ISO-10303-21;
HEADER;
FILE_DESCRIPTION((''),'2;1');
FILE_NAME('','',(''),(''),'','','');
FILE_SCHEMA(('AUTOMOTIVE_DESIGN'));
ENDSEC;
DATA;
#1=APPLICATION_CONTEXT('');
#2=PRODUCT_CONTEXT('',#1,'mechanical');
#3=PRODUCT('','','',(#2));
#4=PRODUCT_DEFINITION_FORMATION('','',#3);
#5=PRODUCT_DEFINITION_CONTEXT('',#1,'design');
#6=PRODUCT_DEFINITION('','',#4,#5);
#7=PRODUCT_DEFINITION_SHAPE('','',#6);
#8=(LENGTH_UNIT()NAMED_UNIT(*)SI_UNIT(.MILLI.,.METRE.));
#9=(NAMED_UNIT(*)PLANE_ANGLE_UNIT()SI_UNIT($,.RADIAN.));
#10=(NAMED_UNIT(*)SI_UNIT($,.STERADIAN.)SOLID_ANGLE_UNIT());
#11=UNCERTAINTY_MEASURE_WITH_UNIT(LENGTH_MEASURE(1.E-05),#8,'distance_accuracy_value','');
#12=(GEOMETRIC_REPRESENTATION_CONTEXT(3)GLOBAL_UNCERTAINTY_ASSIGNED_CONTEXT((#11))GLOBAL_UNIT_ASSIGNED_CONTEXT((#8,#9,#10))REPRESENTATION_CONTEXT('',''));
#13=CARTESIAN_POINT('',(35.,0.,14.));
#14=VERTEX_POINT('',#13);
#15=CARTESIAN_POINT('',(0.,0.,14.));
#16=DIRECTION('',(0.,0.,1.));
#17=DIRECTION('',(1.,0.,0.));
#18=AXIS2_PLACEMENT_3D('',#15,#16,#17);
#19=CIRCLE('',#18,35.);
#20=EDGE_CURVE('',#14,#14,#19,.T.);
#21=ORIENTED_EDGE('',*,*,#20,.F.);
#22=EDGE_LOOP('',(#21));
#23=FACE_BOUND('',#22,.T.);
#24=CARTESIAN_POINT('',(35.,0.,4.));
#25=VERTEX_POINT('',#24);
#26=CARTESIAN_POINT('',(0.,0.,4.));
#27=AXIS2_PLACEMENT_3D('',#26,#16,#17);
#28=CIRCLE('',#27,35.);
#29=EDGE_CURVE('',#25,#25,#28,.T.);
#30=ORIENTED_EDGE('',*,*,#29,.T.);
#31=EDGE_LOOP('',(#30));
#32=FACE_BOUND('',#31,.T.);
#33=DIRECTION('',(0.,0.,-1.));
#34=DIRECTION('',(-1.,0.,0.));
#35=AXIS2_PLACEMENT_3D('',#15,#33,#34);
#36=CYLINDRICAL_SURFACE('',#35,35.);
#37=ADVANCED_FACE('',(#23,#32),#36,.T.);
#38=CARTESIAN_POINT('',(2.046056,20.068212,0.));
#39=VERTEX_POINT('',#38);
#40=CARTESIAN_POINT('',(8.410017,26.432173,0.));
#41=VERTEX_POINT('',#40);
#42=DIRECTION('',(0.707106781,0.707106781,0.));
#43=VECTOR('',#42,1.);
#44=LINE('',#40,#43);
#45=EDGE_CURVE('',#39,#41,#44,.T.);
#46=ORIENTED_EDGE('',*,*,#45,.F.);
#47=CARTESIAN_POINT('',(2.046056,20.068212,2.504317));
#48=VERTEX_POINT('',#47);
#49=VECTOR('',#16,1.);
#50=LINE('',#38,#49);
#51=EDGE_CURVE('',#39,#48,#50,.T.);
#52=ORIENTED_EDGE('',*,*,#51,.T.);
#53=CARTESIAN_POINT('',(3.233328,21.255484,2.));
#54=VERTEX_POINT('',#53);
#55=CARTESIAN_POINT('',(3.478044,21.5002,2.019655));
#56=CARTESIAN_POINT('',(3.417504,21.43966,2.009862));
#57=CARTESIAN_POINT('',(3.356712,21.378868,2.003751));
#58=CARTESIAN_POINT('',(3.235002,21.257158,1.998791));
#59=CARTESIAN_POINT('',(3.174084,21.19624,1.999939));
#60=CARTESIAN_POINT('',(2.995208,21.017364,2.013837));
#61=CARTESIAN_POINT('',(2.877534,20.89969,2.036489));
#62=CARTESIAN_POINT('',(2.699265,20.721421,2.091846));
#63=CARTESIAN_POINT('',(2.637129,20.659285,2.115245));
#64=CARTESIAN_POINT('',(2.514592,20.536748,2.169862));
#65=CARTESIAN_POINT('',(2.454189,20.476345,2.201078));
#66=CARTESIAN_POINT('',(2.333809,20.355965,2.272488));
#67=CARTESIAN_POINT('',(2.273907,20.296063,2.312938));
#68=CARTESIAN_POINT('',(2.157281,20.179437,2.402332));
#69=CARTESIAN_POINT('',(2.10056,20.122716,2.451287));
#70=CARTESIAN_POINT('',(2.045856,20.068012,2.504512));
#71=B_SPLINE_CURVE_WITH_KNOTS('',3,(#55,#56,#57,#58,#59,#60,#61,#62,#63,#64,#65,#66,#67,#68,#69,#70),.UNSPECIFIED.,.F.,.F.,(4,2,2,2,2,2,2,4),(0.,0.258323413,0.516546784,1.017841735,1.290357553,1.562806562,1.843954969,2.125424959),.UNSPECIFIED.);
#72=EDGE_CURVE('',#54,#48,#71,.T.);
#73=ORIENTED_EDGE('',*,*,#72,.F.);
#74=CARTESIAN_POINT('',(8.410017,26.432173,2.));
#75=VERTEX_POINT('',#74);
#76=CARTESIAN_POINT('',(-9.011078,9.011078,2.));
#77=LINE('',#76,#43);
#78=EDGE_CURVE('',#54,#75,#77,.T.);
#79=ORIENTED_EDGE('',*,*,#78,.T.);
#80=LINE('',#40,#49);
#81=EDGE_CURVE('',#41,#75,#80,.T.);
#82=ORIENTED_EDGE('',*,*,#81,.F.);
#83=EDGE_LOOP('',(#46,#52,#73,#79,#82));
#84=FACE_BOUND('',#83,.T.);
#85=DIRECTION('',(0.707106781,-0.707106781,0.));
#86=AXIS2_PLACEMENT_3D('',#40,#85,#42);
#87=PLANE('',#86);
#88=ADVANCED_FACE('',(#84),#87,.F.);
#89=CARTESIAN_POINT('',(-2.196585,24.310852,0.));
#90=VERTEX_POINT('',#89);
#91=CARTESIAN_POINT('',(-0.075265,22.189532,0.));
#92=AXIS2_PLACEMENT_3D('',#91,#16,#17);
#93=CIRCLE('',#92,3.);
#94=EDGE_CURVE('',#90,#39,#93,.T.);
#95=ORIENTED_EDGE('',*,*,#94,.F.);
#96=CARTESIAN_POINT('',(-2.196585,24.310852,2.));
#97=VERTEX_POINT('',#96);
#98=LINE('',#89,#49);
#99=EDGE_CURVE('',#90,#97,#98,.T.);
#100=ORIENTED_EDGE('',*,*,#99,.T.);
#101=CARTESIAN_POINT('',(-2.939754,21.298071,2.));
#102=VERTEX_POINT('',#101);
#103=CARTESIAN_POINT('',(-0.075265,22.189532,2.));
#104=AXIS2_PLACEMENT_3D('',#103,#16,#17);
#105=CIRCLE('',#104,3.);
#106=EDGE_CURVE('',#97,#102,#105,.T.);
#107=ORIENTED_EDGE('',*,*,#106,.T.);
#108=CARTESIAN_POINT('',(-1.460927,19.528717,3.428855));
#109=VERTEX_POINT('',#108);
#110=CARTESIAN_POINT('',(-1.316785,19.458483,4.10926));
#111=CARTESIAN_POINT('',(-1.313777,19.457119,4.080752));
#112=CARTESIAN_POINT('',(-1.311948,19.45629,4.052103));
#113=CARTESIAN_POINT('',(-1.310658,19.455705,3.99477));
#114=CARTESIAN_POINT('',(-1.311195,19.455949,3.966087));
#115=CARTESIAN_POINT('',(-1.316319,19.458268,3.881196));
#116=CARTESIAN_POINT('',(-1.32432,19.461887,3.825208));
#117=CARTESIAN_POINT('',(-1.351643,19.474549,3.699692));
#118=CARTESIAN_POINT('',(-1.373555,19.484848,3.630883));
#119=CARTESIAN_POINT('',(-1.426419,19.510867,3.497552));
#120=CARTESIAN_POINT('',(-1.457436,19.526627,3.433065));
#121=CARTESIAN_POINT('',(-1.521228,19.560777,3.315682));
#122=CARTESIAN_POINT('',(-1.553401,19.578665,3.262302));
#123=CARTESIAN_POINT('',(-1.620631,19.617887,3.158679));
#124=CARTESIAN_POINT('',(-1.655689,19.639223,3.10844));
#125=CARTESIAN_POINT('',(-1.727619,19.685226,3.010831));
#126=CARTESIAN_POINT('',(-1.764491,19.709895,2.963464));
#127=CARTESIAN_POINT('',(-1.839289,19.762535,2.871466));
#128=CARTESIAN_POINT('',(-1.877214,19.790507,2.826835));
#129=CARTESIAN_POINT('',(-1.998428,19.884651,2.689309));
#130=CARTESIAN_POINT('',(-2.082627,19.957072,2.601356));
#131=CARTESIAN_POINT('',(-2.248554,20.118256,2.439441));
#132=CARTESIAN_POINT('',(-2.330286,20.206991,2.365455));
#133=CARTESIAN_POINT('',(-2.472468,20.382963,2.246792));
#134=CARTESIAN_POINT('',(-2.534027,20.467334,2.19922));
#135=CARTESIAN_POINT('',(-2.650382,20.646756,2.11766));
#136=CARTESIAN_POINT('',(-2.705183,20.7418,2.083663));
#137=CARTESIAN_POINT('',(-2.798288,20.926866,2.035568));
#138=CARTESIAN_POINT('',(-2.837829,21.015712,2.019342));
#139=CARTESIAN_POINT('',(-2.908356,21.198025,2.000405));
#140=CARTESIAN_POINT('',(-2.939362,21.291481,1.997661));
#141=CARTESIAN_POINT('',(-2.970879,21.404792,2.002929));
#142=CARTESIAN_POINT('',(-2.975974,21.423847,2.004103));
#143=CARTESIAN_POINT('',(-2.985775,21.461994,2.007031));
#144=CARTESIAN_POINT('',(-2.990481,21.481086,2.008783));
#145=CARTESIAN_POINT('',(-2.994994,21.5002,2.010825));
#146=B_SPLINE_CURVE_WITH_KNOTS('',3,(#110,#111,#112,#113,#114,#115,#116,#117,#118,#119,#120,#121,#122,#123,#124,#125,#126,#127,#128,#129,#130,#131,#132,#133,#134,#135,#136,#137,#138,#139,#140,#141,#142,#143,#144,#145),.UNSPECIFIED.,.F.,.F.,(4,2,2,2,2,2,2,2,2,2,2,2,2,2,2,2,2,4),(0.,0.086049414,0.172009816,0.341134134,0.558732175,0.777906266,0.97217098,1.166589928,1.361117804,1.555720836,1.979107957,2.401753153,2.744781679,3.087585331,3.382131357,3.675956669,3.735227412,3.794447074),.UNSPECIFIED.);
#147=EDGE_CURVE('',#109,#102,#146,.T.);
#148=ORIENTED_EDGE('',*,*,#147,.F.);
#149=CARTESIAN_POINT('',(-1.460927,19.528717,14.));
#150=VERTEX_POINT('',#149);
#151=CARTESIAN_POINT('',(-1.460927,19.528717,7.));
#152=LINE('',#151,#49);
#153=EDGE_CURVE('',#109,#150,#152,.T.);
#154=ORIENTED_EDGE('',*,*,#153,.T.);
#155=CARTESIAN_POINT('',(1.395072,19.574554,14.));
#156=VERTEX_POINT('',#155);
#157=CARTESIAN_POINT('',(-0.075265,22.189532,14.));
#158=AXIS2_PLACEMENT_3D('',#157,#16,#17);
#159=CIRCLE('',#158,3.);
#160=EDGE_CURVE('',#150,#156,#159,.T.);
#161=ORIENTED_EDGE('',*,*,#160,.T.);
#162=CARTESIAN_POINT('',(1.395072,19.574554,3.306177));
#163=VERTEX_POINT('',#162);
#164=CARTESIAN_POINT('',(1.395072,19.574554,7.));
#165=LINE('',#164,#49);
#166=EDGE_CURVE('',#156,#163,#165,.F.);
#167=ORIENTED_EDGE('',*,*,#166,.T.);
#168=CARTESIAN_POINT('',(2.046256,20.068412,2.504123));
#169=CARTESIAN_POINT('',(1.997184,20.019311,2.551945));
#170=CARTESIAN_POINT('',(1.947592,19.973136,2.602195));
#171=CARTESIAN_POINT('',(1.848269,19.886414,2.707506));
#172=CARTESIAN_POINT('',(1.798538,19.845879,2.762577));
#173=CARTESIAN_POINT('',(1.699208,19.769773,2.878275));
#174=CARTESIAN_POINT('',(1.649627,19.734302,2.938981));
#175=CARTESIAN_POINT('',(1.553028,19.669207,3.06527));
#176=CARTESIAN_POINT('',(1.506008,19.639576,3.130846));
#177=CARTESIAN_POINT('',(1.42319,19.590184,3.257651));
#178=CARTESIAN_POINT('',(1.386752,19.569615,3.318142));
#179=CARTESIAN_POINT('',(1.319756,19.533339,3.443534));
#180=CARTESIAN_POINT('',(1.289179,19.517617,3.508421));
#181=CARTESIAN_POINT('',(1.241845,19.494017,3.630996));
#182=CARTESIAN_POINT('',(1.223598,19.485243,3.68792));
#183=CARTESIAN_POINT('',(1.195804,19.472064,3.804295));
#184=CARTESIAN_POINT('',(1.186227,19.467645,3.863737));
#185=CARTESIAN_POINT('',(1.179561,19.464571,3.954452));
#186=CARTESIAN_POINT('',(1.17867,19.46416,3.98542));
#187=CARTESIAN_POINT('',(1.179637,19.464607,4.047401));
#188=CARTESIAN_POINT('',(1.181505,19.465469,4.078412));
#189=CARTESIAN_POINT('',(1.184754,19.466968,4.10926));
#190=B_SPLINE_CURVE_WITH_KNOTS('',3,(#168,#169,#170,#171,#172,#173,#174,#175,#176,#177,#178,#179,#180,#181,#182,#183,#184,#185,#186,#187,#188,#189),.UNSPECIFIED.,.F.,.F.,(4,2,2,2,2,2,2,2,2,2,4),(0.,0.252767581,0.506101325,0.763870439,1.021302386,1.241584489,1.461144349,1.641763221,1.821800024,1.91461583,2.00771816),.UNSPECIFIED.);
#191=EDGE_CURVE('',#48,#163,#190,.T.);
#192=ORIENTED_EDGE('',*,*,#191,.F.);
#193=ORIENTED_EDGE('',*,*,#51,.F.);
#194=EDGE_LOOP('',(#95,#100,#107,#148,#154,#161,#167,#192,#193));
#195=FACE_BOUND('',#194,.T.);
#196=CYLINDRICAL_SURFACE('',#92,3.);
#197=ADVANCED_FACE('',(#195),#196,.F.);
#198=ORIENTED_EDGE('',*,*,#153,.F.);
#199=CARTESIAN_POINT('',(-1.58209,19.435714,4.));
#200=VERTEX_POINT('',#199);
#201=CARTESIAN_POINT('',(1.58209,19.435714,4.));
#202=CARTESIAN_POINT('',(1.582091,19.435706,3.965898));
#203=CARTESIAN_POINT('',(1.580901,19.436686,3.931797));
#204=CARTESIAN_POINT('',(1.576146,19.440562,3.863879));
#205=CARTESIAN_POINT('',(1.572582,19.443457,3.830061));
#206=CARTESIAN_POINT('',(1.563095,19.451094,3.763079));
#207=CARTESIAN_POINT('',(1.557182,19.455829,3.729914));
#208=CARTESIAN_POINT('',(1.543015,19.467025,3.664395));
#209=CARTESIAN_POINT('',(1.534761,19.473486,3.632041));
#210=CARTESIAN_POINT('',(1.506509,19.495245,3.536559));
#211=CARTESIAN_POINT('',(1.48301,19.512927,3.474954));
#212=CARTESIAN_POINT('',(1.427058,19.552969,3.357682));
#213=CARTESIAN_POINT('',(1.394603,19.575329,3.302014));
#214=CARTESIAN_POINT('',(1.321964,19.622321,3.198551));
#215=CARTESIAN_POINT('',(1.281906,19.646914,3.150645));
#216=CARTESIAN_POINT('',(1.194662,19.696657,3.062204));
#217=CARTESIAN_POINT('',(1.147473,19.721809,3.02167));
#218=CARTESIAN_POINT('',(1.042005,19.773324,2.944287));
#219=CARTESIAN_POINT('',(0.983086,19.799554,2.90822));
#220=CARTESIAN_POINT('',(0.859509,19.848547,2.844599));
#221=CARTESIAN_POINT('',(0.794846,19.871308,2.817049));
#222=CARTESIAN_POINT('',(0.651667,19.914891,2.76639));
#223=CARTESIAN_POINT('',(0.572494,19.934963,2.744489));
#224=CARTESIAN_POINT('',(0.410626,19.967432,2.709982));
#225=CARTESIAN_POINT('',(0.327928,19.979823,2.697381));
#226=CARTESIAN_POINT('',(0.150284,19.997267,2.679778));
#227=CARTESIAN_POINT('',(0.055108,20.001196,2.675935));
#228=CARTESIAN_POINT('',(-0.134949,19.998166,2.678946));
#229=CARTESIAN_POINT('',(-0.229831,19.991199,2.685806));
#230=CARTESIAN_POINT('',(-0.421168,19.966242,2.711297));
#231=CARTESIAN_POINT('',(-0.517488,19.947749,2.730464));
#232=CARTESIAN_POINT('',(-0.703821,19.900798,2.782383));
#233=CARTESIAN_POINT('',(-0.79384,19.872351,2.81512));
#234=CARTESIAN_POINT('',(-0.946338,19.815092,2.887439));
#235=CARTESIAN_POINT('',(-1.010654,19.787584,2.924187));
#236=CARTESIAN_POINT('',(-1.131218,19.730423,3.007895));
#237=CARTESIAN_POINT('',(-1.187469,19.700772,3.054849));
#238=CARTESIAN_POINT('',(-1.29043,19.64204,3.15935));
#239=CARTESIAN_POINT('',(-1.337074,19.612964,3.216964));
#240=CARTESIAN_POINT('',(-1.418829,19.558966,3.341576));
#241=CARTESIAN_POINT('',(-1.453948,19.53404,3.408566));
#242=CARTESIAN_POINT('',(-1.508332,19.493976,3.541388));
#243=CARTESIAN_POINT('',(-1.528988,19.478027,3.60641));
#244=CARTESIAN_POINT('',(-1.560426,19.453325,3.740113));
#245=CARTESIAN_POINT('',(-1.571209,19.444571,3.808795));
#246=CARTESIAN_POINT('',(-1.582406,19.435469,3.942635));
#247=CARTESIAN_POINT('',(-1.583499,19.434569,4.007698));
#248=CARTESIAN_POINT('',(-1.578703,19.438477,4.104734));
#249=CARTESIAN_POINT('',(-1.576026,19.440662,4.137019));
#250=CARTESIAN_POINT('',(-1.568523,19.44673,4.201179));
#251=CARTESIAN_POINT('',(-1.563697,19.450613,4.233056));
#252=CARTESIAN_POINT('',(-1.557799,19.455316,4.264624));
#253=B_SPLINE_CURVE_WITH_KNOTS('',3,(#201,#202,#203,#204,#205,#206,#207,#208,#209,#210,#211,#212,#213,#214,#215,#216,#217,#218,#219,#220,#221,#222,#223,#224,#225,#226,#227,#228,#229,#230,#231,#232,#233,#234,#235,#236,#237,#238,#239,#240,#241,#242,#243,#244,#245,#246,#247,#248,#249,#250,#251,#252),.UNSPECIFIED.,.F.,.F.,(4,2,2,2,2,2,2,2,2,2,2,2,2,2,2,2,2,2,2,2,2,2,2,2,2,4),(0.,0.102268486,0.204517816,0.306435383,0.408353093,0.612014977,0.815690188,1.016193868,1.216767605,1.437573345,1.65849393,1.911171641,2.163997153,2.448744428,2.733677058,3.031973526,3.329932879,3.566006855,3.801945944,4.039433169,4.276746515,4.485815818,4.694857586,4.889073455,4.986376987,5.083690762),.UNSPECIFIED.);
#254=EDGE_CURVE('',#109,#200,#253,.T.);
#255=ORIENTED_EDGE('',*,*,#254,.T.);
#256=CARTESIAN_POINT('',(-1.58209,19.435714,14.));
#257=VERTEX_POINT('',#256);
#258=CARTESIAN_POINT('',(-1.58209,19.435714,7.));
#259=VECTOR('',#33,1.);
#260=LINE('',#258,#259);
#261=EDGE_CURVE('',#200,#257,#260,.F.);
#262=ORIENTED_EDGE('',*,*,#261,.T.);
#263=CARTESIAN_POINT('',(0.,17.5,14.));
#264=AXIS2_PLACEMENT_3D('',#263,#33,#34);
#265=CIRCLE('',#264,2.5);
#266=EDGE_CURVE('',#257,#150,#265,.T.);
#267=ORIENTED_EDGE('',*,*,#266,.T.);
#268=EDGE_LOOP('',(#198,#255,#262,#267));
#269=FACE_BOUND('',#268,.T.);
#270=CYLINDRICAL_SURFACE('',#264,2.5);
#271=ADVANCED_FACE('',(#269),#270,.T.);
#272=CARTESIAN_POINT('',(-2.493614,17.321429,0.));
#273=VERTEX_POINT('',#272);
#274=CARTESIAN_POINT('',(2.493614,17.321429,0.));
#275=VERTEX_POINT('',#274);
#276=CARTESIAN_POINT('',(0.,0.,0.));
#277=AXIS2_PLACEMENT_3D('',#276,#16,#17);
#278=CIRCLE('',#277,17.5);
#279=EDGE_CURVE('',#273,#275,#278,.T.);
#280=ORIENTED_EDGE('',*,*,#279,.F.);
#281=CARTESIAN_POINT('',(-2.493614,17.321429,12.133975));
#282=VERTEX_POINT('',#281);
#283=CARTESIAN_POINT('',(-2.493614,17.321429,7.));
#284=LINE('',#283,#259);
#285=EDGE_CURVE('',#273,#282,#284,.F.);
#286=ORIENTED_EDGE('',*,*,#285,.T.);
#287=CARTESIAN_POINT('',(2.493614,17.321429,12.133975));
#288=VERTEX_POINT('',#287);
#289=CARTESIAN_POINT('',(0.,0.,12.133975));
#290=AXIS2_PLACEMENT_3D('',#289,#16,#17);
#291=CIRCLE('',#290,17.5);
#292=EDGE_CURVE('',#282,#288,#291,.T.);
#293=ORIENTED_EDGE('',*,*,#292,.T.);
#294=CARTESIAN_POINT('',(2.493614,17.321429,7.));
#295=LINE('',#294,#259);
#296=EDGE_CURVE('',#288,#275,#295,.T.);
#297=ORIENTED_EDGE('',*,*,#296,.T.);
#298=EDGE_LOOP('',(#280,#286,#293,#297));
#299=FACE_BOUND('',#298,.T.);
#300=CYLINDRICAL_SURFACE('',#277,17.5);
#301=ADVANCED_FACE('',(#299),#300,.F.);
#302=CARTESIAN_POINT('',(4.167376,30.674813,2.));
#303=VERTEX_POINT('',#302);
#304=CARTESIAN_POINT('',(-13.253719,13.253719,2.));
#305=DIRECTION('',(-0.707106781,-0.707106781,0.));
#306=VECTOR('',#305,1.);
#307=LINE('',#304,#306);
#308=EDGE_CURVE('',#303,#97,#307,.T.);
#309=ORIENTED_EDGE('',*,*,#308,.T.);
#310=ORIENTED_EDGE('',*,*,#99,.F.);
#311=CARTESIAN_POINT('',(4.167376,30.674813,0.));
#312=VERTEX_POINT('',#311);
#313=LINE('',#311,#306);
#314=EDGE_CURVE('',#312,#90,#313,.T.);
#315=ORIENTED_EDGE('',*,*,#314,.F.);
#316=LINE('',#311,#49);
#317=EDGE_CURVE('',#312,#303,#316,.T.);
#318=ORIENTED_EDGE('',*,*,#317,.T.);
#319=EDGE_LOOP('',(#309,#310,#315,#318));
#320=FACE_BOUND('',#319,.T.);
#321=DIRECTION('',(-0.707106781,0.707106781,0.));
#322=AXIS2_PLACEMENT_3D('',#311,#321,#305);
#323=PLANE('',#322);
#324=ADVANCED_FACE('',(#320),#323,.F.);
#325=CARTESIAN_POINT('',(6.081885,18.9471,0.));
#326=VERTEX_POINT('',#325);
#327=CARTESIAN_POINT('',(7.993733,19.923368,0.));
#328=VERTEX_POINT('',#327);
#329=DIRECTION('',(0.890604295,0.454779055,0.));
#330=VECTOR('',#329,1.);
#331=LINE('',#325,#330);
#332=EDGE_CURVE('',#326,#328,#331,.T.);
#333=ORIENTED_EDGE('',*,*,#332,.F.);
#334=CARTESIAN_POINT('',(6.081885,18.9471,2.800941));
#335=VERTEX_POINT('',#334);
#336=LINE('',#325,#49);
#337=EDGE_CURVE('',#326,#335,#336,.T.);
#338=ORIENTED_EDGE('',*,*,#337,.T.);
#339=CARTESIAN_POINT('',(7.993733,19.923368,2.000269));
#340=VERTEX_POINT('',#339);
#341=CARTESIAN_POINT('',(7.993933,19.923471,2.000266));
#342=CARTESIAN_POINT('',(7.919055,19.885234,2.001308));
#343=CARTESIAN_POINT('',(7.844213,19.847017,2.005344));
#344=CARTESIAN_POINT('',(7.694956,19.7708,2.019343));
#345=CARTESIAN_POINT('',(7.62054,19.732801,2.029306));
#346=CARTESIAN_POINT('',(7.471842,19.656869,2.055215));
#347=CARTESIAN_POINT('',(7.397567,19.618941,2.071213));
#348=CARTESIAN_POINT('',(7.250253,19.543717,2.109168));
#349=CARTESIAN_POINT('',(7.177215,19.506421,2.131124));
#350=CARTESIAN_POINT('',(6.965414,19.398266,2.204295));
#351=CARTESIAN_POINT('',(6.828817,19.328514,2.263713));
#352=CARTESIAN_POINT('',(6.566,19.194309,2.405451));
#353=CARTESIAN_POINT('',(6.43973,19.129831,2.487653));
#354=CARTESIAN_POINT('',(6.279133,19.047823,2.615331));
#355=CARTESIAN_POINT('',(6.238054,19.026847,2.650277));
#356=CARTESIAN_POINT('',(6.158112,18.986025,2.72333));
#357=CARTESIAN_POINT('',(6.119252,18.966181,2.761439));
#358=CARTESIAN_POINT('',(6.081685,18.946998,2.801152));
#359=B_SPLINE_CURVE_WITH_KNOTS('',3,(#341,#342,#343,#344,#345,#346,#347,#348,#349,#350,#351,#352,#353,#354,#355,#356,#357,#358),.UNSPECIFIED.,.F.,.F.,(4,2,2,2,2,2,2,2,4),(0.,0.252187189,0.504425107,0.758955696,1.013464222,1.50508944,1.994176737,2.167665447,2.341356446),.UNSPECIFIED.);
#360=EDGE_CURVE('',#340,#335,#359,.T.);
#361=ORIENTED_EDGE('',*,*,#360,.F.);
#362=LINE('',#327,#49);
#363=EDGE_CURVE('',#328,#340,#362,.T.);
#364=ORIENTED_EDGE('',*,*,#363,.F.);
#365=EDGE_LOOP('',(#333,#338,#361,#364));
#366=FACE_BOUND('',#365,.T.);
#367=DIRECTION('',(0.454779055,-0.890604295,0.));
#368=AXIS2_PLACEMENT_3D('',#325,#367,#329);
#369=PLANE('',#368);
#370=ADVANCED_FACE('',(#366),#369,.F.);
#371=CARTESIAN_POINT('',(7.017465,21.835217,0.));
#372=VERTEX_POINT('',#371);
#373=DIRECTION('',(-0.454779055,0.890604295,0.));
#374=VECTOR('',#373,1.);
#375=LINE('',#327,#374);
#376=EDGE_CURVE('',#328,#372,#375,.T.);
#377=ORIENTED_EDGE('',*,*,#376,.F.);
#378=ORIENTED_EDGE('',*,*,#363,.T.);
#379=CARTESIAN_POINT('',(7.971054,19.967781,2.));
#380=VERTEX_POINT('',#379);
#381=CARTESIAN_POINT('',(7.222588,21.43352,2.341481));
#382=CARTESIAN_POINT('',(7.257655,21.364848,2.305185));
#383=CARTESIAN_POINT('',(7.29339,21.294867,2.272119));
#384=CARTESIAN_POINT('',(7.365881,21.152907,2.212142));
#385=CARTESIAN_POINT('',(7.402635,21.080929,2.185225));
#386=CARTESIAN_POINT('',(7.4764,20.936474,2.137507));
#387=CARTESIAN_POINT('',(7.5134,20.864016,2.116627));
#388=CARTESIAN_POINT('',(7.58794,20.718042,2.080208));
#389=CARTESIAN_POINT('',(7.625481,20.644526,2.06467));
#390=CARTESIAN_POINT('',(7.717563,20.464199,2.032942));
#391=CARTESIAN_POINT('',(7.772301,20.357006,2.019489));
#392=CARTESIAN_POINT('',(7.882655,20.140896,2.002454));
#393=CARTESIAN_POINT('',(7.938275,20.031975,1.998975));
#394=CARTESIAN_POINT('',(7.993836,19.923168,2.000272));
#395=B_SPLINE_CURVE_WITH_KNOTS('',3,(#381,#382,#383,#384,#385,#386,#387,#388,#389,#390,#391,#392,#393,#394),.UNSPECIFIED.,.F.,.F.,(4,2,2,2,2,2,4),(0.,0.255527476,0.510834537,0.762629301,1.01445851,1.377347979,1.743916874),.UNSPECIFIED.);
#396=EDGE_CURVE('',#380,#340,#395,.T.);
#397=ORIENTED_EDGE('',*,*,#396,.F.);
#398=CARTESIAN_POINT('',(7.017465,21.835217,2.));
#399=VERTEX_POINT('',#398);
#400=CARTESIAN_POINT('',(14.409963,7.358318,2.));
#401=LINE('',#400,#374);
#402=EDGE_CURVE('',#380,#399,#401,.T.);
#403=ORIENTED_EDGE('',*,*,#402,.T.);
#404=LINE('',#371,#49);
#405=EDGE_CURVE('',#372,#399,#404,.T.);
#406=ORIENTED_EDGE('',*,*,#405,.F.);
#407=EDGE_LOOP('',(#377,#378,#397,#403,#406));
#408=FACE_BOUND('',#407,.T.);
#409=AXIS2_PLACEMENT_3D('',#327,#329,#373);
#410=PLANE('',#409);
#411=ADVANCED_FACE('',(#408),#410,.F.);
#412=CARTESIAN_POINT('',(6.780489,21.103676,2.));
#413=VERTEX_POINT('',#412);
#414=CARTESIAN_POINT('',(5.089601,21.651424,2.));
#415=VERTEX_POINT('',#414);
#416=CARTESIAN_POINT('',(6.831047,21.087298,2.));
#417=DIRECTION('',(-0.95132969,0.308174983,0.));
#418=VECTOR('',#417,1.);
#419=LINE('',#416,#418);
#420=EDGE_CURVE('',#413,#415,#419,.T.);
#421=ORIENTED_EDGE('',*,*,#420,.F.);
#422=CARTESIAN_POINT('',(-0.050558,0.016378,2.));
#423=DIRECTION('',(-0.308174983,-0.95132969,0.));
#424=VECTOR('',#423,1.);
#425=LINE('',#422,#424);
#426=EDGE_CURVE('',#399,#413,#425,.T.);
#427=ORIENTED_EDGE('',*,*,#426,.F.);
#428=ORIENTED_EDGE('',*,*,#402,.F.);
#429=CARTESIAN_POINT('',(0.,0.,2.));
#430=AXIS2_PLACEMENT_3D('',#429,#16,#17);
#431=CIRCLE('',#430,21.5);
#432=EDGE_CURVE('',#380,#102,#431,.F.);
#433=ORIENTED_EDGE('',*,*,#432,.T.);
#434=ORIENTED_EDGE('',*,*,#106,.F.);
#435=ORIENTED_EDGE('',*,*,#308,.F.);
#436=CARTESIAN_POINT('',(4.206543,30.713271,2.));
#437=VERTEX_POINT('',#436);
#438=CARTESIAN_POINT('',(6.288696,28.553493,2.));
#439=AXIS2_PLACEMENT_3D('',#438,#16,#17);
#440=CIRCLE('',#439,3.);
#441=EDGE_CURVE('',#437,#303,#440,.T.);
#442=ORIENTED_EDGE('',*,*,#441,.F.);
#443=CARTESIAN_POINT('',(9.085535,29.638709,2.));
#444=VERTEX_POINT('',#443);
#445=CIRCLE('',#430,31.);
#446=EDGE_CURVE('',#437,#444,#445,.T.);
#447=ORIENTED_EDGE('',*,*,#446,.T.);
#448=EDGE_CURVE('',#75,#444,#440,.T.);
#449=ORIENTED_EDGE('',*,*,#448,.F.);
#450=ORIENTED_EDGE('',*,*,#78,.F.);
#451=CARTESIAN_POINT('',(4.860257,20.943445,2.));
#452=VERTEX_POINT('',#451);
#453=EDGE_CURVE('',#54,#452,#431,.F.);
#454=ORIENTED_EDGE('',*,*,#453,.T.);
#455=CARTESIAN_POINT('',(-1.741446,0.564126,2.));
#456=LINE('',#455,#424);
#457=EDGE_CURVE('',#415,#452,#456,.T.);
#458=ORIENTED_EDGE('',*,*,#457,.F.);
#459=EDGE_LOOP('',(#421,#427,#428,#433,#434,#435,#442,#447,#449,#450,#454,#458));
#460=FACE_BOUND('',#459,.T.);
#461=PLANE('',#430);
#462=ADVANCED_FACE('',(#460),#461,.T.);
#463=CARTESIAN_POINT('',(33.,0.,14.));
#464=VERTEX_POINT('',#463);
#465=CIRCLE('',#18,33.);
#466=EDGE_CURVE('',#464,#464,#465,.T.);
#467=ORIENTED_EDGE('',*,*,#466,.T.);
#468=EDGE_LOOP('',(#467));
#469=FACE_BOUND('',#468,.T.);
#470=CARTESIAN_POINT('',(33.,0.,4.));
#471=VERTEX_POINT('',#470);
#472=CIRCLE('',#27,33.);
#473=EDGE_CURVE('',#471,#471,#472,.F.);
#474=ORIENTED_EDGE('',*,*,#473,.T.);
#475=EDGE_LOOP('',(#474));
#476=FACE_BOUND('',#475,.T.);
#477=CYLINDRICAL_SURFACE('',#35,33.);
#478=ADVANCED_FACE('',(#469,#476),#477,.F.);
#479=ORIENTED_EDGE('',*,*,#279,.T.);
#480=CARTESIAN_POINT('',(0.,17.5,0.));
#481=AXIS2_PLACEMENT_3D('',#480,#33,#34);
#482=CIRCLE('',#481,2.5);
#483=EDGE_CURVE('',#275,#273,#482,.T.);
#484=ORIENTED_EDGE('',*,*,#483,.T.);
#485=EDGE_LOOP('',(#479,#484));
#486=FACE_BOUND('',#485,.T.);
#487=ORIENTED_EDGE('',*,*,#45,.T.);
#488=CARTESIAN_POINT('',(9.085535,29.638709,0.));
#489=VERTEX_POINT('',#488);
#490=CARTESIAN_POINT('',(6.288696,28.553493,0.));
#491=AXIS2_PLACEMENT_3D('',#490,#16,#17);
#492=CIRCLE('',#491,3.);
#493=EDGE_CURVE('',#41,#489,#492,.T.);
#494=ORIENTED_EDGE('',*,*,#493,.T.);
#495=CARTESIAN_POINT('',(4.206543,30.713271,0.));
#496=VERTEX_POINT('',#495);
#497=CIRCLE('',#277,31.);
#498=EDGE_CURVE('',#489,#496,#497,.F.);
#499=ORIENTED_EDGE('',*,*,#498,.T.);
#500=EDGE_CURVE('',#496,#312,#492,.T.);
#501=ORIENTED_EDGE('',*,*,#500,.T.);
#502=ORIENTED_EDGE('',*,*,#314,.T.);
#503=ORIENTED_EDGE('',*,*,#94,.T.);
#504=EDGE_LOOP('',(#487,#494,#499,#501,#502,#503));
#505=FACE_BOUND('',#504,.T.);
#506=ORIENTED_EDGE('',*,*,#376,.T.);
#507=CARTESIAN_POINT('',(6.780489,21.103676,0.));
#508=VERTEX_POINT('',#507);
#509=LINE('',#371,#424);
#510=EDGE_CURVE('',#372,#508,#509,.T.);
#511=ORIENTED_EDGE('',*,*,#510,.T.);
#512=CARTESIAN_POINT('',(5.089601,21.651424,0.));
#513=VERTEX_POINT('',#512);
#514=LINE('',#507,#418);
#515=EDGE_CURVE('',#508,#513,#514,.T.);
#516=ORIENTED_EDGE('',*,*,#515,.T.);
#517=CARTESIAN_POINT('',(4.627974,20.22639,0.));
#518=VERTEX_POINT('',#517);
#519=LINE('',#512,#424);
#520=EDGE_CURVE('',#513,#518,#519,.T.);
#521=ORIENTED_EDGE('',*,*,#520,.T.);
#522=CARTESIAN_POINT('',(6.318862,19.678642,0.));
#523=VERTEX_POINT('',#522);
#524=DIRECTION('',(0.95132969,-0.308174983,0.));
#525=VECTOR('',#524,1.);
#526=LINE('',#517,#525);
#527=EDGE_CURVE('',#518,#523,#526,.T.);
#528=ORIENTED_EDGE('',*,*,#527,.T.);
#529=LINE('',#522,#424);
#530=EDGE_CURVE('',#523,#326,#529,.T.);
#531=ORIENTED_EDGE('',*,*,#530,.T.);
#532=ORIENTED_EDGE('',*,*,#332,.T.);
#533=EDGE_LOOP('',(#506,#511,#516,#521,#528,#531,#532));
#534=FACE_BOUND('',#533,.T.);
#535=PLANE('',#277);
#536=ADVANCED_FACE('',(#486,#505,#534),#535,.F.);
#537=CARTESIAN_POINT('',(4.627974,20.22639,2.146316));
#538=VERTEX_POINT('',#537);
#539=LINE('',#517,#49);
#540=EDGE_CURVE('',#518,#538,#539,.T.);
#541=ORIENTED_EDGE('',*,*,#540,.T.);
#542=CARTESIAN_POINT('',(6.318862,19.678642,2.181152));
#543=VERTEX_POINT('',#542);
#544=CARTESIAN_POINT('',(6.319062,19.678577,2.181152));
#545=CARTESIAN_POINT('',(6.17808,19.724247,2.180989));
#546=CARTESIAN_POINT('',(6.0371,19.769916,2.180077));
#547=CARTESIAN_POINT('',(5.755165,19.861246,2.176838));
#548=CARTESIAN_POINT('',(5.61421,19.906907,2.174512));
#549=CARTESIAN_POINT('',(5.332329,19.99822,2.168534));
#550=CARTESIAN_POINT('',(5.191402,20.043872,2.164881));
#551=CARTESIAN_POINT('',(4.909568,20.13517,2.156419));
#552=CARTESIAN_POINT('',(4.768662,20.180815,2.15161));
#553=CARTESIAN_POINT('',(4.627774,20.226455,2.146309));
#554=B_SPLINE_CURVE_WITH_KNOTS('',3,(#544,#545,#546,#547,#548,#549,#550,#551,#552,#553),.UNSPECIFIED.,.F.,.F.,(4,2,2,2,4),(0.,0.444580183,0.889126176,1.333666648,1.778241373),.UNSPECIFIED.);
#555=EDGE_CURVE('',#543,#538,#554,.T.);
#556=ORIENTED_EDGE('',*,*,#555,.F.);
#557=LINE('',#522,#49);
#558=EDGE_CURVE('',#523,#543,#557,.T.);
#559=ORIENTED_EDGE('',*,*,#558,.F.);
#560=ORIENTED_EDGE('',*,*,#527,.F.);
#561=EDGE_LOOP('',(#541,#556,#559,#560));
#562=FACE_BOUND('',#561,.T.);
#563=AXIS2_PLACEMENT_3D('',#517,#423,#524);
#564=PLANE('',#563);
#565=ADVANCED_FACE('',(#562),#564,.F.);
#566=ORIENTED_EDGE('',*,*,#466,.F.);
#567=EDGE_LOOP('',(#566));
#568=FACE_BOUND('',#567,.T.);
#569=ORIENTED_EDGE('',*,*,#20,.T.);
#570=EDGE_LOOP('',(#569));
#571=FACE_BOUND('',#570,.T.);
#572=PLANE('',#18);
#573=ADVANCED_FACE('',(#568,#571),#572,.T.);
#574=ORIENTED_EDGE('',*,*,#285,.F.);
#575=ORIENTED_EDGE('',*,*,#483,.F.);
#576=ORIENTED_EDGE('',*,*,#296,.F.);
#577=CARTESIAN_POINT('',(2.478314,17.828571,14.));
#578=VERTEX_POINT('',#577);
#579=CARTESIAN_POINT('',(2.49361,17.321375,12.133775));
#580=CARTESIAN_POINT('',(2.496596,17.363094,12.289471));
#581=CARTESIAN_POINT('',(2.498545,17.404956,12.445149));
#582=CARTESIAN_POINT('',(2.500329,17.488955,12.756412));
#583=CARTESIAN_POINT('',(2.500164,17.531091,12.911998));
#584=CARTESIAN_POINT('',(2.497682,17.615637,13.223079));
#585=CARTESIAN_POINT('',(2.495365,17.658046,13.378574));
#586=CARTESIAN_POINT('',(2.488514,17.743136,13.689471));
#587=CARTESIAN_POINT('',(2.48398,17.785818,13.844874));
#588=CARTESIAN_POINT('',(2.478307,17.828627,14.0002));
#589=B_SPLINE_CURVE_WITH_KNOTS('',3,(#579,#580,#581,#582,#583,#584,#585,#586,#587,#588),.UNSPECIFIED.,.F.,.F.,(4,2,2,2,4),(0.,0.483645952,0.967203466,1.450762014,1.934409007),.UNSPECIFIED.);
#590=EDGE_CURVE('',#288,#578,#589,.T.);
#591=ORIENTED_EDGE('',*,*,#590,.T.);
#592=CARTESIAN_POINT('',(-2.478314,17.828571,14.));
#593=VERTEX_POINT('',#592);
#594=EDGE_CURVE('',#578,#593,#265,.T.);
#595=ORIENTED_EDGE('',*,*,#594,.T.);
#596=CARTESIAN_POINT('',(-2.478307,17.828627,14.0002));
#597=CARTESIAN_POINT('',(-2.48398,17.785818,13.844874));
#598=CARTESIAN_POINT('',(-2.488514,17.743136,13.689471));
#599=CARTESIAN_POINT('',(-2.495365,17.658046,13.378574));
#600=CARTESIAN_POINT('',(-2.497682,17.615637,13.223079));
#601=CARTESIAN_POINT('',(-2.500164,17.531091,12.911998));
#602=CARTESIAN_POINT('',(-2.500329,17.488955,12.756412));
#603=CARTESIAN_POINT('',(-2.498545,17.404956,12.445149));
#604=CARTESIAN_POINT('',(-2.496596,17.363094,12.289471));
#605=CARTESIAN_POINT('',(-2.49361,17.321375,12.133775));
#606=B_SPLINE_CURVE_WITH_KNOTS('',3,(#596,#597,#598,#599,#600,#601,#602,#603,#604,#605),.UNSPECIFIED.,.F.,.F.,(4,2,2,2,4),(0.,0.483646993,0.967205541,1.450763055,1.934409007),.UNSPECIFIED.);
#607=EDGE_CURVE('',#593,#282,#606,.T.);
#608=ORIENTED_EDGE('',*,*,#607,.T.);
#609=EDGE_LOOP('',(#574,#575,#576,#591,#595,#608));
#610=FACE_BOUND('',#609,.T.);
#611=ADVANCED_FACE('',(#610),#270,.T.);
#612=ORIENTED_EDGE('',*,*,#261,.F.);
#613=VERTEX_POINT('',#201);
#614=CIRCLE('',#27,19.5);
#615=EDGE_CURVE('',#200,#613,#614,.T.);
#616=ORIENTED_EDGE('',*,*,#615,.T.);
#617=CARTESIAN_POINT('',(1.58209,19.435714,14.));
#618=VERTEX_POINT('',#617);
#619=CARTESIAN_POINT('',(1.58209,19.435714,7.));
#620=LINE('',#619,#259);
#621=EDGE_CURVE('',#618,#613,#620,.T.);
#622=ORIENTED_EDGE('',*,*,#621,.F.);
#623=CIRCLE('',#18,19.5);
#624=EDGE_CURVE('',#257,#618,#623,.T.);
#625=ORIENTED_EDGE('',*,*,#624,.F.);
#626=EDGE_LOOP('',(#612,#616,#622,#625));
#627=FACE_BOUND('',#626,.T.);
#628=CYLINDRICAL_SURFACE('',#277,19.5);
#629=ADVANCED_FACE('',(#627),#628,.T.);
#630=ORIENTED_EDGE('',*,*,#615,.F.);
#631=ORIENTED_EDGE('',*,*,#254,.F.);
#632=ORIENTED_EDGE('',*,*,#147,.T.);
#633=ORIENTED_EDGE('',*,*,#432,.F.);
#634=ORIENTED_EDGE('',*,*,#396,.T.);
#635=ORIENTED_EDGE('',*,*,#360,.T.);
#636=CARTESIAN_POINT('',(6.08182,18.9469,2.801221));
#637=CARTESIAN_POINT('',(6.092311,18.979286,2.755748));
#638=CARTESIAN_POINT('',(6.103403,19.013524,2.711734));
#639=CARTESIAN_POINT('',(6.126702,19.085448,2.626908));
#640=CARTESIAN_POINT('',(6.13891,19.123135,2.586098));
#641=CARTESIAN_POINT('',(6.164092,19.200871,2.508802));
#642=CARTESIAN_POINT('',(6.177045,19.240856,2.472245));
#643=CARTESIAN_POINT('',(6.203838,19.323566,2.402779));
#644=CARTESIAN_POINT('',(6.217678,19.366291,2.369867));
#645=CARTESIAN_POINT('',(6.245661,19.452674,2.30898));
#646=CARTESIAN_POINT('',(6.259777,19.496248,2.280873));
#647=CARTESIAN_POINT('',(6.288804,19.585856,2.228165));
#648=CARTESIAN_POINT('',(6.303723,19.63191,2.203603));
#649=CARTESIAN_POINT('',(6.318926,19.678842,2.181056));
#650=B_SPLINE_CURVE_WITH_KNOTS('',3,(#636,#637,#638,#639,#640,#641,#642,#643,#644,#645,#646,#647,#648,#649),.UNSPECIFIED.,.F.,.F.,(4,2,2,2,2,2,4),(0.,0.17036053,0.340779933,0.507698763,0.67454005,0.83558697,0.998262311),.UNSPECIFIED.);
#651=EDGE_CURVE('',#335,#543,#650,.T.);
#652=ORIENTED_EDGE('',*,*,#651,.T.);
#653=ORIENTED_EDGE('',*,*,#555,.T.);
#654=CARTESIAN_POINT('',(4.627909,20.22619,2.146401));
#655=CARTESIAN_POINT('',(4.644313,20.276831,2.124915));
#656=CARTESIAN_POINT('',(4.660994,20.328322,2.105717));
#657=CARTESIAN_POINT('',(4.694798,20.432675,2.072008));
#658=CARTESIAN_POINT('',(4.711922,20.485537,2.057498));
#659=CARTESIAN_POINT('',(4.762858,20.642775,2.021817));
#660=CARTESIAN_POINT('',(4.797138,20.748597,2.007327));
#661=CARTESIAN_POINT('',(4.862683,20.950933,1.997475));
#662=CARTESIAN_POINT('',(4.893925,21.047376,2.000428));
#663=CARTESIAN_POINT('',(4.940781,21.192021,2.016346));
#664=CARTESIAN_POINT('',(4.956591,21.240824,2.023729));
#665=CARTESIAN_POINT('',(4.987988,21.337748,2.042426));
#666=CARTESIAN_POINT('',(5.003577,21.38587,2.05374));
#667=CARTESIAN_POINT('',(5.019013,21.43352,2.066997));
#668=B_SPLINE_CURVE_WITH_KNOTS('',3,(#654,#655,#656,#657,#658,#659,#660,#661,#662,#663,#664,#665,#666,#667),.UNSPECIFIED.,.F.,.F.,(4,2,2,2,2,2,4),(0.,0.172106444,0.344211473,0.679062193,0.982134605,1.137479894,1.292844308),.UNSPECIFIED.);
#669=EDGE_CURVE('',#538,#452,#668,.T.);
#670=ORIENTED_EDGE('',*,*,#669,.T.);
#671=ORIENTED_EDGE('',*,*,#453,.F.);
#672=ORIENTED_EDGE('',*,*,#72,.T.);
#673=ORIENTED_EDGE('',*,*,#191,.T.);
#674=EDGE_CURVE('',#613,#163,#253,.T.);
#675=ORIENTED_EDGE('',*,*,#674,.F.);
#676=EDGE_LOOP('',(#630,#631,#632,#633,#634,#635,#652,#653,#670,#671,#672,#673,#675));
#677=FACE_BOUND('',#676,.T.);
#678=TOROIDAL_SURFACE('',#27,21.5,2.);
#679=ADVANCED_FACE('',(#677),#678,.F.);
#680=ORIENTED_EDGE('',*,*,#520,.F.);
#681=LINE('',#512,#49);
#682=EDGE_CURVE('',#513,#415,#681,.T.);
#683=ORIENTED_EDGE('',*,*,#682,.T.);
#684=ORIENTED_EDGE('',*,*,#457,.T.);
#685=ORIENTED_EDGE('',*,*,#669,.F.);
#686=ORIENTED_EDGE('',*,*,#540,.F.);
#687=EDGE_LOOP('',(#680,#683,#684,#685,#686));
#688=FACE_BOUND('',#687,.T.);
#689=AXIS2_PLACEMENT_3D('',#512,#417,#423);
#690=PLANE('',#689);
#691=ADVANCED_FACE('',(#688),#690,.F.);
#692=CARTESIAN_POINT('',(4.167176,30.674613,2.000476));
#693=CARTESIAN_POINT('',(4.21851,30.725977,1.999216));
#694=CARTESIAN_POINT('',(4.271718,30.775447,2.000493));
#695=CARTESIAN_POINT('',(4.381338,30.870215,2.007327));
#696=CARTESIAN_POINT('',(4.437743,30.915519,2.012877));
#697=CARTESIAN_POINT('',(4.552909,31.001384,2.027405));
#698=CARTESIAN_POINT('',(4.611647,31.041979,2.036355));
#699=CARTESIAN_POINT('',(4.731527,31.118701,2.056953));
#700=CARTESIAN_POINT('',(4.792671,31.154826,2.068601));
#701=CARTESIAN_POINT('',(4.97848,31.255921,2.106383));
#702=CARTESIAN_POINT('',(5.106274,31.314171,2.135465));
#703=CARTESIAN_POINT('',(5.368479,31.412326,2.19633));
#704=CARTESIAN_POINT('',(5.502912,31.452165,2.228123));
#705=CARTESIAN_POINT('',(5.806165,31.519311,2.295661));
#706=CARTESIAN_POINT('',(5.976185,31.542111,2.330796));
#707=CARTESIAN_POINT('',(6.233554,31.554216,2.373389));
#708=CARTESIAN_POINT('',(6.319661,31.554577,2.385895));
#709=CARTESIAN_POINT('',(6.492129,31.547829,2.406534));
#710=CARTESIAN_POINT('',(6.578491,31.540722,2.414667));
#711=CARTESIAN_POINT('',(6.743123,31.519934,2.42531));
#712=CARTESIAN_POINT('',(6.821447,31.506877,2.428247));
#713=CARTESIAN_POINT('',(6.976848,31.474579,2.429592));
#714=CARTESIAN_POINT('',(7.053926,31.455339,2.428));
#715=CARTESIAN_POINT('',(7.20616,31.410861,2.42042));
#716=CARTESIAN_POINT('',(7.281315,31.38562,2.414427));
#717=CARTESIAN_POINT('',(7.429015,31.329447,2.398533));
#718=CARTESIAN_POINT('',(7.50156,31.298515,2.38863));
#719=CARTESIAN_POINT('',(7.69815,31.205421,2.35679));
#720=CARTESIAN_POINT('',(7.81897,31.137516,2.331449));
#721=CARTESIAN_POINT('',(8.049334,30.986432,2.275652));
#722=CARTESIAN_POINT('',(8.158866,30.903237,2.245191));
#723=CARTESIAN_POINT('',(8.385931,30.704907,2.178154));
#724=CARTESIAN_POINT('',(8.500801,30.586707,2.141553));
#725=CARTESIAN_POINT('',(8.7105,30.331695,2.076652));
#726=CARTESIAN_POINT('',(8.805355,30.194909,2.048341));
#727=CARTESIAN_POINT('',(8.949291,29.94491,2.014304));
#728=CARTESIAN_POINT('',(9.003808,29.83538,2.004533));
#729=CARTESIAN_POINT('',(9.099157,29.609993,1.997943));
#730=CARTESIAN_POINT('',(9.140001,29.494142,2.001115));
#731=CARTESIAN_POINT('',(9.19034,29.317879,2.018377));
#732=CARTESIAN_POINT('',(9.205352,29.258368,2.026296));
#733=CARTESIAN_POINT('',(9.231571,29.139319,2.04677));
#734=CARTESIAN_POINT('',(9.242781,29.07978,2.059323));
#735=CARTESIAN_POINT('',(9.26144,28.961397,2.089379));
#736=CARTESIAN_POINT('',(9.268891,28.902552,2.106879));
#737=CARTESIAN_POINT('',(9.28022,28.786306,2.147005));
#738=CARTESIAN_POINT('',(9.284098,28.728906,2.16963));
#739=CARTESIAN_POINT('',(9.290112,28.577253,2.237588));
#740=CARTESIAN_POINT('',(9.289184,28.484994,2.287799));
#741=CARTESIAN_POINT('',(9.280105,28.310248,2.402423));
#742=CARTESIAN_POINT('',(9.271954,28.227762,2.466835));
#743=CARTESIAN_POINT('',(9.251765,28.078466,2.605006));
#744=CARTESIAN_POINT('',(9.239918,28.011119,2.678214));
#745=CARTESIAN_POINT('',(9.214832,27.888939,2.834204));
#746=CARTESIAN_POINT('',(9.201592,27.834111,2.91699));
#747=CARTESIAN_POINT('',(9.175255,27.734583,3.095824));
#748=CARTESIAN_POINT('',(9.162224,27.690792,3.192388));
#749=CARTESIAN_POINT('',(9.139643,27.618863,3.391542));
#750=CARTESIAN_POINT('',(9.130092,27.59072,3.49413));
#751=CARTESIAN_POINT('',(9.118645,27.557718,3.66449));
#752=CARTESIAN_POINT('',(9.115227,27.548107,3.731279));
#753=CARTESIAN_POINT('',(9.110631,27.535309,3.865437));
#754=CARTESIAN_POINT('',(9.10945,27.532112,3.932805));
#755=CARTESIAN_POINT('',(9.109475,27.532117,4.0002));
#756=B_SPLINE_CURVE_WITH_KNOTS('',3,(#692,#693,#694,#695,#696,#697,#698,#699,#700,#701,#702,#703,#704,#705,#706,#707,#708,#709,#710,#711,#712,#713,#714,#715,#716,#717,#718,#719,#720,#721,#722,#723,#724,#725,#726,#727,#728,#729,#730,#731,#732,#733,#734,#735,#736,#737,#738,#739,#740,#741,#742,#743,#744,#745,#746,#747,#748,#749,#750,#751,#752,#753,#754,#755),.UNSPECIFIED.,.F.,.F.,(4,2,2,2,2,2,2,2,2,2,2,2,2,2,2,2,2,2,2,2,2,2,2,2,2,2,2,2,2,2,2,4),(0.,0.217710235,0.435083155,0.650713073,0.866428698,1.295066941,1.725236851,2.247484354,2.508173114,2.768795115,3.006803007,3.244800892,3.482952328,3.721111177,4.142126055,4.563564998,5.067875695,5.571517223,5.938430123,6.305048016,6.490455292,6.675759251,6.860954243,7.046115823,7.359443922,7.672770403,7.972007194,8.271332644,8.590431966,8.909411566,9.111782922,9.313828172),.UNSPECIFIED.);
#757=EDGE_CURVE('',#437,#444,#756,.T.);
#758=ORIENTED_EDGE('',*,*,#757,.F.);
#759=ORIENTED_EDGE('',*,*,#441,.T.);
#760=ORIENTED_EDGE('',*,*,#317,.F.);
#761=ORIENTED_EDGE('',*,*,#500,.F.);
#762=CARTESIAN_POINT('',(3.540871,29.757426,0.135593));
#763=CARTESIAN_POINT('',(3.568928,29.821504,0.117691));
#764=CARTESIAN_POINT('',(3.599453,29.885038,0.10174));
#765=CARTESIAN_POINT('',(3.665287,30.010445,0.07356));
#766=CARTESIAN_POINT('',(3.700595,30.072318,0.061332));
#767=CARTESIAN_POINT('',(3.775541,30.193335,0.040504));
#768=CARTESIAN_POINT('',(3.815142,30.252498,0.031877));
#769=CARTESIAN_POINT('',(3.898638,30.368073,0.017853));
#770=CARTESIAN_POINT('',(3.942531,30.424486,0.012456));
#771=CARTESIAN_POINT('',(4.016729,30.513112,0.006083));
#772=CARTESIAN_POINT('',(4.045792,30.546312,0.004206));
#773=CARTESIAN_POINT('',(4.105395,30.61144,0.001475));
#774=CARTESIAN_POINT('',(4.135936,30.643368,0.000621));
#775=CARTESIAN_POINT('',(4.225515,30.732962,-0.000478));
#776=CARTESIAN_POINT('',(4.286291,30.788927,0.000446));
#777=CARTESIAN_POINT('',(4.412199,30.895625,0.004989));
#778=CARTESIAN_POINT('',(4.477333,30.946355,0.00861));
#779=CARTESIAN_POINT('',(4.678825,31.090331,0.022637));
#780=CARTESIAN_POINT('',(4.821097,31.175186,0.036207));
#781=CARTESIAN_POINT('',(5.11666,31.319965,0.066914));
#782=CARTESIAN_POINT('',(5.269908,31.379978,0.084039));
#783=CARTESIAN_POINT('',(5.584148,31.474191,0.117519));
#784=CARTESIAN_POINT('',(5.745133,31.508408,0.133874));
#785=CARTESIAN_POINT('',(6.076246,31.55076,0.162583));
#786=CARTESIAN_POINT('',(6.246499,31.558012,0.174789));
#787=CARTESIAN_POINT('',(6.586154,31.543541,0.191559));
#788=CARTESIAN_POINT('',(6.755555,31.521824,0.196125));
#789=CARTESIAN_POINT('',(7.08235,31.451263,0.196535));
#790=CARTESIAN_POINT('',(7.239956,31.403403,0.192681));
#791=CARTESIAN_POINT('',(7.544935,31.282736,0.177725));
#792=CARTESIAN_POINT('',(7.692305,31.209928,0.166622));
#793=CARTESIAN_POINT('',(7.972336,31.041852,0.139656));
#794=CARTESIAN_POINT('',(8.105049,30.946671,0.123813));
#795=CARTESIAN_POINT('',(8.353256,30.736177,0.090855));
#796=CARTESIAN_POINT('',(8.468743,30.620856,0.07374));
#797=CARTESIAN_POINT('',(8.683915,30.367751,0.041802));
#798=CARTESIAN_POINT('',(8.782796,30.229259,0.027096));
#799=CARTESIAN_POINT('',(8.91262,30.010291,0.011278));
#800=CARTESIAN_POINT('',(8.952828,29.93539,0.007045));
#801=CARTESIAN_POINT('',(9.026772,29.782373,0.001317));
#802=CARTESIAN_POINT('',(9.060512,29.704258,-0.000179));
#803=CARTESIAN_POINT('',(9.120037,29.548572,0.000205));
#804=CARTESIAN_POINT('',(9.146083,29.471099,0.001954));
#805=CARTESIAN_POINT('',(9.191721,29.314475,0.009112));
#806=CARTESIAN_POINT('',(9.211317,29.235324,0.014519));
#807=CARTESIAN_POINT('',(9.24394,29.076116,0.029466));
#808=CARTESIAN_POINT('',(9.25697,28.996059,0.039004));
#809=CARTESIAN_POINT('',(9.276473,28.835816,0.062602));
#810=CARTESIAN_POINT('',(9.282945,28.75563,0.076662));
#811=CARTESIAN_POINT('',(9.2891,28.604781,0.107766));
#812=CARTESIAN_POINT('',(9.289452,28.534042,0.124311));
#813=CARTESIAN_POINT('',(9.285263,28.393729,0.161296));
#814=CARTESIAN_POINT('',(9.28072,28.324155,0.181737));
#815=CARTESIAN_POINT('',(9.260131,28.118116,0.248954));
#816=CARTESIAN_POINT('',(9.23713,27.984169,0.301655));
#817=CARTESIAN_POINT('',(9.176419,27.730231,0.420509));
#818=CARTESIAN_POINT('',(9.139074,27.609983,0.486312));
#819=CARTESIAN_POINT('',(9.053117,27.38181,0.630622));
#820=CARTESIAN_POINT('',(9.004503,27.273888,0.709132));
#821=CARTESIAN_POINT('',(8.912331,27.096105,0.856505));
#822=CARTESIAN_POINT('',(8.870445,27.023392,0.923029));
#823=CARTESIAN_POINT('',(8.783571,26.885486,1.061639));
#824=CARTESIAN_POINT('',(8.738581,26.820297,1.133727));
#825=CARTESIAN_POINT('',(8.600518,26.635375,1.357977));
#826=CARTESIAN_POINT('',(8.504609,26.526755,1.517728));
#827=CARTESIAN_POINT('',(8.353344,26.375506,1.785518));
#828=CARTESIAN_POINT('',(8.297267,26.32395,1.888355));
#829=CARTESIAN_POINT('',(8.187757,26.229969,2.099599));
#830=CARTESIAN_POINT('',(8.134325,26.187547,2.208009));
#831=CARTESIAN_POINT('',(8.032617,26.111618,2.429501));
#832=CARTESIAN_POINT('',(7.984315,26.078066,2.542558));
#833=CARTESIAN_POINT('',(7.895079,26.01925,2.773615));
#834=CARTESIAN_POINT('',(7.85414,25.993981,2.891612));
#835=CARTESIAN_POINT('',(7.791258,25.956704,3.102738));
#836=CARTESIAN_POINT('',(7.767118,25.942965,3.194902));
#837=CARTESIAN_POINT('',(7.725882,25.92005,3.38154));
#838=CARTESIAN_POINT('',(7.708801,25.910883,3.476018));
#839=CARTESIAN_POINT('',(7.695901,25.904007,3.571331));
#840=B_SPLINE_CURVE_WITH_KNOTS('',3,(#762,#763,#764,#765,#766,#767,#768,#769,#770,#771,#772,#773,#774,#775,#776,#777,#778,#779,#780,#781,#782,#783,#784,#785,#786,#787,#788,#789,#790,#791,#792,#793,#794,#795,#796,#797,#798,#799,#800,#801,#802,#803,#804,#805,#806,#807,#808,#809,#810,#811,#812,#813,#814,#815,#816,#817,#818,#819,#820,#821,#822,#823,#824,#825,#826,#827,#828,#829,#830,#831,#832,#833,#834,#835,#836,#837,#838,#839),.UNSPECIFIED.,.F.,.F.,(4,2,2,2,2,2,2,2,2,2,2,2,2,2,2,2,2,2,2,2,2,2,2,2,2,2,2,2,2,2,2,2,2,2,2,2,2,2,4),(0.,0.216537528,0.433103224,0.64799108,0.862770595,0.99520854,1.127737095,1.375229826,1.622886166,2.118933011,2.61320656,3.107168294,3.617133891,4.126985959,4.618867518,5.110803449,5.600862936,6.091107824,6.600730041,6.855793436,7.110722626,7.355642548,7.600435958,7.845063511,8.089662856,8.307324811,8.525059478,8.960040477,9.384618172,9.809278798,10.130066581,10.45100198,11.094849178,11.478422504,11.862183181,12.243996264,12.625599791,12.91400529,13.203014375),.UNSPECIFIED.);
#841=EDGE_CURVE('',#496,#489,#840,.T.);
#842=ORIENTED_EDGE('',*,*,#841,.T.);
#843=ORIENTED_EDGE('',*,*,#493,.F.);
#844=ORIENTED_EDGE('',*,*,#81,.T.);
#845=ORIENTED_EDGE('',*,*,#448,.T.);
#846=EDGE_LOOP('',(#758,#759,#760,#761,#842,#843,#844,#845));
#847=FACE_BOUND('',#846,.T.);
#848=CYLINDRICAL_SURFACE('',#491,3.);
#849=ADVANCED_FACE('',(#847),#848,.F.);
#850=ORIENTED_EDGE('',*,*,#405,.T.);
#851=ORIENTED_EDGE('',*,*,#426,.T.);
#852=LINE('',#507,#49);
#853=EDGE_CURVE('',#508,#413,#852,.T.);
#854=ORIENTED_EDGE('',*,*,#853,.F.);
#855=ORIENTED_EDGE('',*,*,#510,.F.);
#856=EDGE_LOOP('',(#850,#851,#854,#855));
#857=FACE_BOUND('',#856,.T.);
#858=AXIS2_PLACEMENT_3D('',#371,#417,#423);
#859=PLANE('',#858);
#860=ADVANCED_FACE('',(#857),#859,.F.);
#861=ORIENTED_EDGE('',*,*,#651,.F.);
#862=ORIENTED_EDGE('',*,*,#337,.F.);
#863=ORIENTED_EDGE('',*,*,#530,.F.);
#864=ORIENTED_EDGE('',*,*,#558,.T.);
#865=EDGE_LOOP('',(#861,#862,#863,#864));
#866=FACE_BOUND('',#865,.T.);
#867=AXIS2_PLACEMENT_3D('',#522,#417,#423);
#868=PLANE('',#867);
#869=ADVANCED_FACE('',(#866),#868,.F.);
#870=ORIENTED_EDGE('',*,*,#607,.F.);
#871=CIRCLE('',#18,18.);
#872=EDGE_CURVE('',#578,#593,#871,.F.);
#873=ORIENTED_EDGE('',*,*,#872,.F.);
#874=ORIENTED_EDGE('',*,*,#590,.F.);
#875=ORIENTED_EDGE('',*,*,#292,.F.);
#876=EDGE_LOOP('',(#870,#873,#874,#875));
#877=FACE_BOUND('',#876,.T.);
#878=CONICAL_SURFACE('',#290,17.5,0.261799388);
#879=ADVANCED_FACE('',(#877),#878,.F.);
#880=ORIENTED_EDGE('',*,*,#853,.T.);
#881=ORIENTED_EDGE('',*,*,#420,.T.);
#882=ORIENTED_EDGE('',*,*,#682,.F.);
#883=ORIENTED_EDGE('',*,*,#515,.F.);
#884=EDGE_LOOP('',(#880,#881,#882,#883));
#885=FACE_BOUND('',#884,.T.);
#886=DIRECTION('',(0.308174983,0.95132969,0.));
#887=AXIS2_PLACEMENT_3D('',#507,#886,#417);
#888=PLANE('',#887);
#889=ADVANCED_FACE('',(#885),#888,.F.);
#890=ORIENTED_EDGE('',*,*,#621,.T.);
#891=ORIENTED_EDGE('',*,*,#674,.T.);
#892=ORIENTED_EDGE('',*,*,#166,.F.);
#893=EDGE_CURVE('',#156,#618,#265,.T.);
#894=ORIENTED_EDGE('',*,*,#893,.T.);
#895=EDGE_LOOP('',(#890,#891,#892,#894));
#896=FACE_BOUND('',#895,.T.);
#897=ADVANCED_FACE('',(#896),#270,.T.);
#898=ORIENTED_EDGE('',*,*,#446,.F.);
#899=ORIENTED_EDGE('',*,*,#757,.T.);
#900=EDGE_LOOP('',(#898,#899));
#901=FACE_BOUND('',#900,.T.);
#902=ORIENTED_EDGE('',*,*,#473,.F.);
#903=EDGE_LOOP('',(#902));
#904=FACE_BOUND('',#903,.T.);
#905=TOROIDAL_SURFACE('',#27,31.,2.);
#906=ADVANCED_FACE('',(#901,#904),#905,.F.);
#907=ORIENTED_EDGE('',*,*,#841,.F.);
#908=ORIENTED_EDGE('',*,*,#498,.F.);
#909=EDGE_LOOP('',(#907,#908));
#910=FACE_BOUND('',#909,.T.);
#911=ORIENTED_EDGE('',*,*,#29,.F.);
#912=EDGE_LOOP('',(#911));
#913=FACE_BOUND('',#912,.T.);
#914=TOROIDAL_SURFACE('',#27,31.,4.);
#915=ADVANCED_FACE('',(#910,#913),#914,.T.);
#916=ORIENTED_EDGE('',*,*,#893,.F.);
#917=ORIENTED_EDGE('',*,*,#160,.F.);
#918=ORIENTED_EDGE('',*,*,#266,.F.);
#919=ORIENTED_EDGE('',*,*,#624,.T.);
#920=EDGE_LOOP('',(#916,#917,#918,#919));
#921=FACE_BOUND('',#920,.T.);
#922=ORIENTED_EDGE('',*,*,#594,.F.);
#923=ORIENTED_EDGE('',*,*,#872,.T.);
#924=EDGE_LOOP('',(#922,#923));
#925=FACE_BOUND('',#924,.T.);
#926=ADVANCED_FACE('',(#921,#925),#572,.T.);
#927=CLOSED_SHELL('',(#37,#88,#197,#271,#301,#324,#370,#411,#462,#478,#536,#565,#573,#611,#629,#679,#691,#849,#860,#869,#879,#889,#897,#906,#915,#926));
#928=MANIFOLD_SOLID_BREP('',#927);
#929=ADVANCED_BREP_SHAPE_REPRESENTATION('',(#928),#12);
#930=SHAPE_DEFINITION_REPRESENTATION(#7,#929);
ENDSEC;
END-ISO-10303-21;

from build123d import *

# Parameters (mm, degrees)
CROQUIS1_R                 = 35
SALIENTE_EXTRUIR1_DEPTH    = 14
CROQUIS2_R                 = 17.5
CORTAR_EXTRUIR1_DEPTH      = 52.439284598
VACIADO1_T                 = -2
CHAFL_N1_SIZE              = 0.5
CHAFL_N1_SIZE2             = 1.866025404
CROQUIS5_R                 = 2.5
SALIENTE_EXTRUIR2_DEPTH    = 14
REDONDEO2_R                = 4
CORTAR_EXTRUIR2_DEPTH      = 51.931326337
CORTAR_EXTRUIR2_DEPTH_BACK = 51.931326337
CORTAR_EXTRUIR3_DEPTH      = 51.931326474
CORTAR_EXTRUIR3_DEPTH_BACK = 51.931326474


with BuildPart() as part:
    # Croquis1 → Saliente-Extruir1 (new body)
    with BuildSketch(Plane.XY):
        Circle(CROQUIS1_R)
    extrude(amount=SALIENTE_EXTRUIR1_DEPTH)

    # Croquis2 → Cortar-Extruir1 (cut, through all)
    with BuildSketch(Plane.XY.offset(14)):
        Circle(CROQUIS2_R)
    extrude(amount=-CORTAR_EXTRUIR1_DEPTH, mode=Mode.SUBTRACT)

    # Vaciado1
    vaciado1_openings = [part.faces().sort_by_distance(p)[0] for p in [
        (-34.010050506, 0, 14),
    ]]
    offset(amount=VACIADO1_T, openings=vaciado1_openings, kind=Kind.INTERSECTION)

    # Chaflán1
    chafl_n1_edges = [part.edges().sort_by_distance(p)[0] for p in [
        (-17.5, 0, 14),
    ]]
    chafl_n1_side = [part.faces().sort_by_distance(p)[0] for p in [
        (-18.948456711, 0, 14),
    ]]
    chamfer(chafl_n1_edges, length=CHAFL_N1_SIZE, length2=CHAFL_N1_SIZE2, reference=chafl_n1_side[0])

    # Croquis5 → Saliente-Extruir2 (add, through all)
    with BuildSketch(Plane(origin=(0, 0, 0), x_dir=(-1, 0, 0), z_dir=(0, 0, -1))):
        with Locations((0, 17.5)):
            Circle(CROQUIS5_R)
    extrude(amount=-SALIENTE_EXTRUIR2_DEPTH)

    # Redondeo1: read off the stored shape, not the designer's step
    # Redondeo1 outline → Redondeo1 (revolve)
    with BuildSketch(Plane.XZ):
        with BuildLine():
            ThreePointArc((21.5, 2), (20.085786438, 2.585786438), (19.5, 4))
            Line((19.5, 4), (19.5, 2))
            Line((19.5, 2), (21.5, 2))
        make_face()
        with BuildLine():
            ThreePointArc((33, 4), (32.414213562, 2.585786438), (31, 2))
            Line((31, 2), (33, 2))
            Line((33, 2), (33, 4))
        make_face()
    revolve(axis=Axis((0, 0, 0), (0, 0, 1)))

    # Redondeo2
    redondeo2_edges = [part.edges().sort_by_distance(p)[0] for p in [
        (-35, 0, 0),
    ]]
    fillet(redondeo2_edges, radius=REDONDEO2_R)

    # Croquis3 → Cortar-Extruir2 (cut, two sides: drawn at the far end of the back side and taken through both)
    with BuildSketch(Plane.XY.offset(2).offset(-CORTAR_EXTRUIR2_DEPTH_BACK)):
        with BuildLine():
            Line((8.410016673, 26.432172655), (2.046055643, 20.068211625))
            ThreePointArc((2.046055643, 20.068211625), (-2.196585045, 20.068211625), (-2.196585045, 24.310852312))
            Line((-2.196585045, 24.310852312), (4.167375986, 30.674813342))
            ThreePointArc((4.167375986, 30.674813342), (8.410016673, 30.674813342), (8.410016673, 26.432172655))
        make_face()
    extrude(amount=CORTAR_EXTRUIR2_DEPTH + CORTAR_EXTRUIR2_DEPTH_BACK, mode=Mode.SUBTRACT)

    # Croquis4 → Cortar-Extruir3 (cut, two sides: drawn at the far end of the back side and taken through both)
    with BuildSketch(Plane.XY.offset(2).offset(-CORTAR_EXTRUIR3_DEPTH_BACK)):
        Polygon((5.089600939, 21.651424089), (4.627973548, 20.226390042), (6.318861503, 19.678641589), (6.081885084, 18.947100367), (7.993733444, 19.923368498), (7.017465313, 21.835216858), (6.780488894, 21.103675636), align=None)
    extrude(amount=CORTAR_EXTRUIR3_DEPTH + CORTAR_EXTRUIR3_DEPTH_BACK, mode=Mode.SUBTRACT)


solid = part.part
